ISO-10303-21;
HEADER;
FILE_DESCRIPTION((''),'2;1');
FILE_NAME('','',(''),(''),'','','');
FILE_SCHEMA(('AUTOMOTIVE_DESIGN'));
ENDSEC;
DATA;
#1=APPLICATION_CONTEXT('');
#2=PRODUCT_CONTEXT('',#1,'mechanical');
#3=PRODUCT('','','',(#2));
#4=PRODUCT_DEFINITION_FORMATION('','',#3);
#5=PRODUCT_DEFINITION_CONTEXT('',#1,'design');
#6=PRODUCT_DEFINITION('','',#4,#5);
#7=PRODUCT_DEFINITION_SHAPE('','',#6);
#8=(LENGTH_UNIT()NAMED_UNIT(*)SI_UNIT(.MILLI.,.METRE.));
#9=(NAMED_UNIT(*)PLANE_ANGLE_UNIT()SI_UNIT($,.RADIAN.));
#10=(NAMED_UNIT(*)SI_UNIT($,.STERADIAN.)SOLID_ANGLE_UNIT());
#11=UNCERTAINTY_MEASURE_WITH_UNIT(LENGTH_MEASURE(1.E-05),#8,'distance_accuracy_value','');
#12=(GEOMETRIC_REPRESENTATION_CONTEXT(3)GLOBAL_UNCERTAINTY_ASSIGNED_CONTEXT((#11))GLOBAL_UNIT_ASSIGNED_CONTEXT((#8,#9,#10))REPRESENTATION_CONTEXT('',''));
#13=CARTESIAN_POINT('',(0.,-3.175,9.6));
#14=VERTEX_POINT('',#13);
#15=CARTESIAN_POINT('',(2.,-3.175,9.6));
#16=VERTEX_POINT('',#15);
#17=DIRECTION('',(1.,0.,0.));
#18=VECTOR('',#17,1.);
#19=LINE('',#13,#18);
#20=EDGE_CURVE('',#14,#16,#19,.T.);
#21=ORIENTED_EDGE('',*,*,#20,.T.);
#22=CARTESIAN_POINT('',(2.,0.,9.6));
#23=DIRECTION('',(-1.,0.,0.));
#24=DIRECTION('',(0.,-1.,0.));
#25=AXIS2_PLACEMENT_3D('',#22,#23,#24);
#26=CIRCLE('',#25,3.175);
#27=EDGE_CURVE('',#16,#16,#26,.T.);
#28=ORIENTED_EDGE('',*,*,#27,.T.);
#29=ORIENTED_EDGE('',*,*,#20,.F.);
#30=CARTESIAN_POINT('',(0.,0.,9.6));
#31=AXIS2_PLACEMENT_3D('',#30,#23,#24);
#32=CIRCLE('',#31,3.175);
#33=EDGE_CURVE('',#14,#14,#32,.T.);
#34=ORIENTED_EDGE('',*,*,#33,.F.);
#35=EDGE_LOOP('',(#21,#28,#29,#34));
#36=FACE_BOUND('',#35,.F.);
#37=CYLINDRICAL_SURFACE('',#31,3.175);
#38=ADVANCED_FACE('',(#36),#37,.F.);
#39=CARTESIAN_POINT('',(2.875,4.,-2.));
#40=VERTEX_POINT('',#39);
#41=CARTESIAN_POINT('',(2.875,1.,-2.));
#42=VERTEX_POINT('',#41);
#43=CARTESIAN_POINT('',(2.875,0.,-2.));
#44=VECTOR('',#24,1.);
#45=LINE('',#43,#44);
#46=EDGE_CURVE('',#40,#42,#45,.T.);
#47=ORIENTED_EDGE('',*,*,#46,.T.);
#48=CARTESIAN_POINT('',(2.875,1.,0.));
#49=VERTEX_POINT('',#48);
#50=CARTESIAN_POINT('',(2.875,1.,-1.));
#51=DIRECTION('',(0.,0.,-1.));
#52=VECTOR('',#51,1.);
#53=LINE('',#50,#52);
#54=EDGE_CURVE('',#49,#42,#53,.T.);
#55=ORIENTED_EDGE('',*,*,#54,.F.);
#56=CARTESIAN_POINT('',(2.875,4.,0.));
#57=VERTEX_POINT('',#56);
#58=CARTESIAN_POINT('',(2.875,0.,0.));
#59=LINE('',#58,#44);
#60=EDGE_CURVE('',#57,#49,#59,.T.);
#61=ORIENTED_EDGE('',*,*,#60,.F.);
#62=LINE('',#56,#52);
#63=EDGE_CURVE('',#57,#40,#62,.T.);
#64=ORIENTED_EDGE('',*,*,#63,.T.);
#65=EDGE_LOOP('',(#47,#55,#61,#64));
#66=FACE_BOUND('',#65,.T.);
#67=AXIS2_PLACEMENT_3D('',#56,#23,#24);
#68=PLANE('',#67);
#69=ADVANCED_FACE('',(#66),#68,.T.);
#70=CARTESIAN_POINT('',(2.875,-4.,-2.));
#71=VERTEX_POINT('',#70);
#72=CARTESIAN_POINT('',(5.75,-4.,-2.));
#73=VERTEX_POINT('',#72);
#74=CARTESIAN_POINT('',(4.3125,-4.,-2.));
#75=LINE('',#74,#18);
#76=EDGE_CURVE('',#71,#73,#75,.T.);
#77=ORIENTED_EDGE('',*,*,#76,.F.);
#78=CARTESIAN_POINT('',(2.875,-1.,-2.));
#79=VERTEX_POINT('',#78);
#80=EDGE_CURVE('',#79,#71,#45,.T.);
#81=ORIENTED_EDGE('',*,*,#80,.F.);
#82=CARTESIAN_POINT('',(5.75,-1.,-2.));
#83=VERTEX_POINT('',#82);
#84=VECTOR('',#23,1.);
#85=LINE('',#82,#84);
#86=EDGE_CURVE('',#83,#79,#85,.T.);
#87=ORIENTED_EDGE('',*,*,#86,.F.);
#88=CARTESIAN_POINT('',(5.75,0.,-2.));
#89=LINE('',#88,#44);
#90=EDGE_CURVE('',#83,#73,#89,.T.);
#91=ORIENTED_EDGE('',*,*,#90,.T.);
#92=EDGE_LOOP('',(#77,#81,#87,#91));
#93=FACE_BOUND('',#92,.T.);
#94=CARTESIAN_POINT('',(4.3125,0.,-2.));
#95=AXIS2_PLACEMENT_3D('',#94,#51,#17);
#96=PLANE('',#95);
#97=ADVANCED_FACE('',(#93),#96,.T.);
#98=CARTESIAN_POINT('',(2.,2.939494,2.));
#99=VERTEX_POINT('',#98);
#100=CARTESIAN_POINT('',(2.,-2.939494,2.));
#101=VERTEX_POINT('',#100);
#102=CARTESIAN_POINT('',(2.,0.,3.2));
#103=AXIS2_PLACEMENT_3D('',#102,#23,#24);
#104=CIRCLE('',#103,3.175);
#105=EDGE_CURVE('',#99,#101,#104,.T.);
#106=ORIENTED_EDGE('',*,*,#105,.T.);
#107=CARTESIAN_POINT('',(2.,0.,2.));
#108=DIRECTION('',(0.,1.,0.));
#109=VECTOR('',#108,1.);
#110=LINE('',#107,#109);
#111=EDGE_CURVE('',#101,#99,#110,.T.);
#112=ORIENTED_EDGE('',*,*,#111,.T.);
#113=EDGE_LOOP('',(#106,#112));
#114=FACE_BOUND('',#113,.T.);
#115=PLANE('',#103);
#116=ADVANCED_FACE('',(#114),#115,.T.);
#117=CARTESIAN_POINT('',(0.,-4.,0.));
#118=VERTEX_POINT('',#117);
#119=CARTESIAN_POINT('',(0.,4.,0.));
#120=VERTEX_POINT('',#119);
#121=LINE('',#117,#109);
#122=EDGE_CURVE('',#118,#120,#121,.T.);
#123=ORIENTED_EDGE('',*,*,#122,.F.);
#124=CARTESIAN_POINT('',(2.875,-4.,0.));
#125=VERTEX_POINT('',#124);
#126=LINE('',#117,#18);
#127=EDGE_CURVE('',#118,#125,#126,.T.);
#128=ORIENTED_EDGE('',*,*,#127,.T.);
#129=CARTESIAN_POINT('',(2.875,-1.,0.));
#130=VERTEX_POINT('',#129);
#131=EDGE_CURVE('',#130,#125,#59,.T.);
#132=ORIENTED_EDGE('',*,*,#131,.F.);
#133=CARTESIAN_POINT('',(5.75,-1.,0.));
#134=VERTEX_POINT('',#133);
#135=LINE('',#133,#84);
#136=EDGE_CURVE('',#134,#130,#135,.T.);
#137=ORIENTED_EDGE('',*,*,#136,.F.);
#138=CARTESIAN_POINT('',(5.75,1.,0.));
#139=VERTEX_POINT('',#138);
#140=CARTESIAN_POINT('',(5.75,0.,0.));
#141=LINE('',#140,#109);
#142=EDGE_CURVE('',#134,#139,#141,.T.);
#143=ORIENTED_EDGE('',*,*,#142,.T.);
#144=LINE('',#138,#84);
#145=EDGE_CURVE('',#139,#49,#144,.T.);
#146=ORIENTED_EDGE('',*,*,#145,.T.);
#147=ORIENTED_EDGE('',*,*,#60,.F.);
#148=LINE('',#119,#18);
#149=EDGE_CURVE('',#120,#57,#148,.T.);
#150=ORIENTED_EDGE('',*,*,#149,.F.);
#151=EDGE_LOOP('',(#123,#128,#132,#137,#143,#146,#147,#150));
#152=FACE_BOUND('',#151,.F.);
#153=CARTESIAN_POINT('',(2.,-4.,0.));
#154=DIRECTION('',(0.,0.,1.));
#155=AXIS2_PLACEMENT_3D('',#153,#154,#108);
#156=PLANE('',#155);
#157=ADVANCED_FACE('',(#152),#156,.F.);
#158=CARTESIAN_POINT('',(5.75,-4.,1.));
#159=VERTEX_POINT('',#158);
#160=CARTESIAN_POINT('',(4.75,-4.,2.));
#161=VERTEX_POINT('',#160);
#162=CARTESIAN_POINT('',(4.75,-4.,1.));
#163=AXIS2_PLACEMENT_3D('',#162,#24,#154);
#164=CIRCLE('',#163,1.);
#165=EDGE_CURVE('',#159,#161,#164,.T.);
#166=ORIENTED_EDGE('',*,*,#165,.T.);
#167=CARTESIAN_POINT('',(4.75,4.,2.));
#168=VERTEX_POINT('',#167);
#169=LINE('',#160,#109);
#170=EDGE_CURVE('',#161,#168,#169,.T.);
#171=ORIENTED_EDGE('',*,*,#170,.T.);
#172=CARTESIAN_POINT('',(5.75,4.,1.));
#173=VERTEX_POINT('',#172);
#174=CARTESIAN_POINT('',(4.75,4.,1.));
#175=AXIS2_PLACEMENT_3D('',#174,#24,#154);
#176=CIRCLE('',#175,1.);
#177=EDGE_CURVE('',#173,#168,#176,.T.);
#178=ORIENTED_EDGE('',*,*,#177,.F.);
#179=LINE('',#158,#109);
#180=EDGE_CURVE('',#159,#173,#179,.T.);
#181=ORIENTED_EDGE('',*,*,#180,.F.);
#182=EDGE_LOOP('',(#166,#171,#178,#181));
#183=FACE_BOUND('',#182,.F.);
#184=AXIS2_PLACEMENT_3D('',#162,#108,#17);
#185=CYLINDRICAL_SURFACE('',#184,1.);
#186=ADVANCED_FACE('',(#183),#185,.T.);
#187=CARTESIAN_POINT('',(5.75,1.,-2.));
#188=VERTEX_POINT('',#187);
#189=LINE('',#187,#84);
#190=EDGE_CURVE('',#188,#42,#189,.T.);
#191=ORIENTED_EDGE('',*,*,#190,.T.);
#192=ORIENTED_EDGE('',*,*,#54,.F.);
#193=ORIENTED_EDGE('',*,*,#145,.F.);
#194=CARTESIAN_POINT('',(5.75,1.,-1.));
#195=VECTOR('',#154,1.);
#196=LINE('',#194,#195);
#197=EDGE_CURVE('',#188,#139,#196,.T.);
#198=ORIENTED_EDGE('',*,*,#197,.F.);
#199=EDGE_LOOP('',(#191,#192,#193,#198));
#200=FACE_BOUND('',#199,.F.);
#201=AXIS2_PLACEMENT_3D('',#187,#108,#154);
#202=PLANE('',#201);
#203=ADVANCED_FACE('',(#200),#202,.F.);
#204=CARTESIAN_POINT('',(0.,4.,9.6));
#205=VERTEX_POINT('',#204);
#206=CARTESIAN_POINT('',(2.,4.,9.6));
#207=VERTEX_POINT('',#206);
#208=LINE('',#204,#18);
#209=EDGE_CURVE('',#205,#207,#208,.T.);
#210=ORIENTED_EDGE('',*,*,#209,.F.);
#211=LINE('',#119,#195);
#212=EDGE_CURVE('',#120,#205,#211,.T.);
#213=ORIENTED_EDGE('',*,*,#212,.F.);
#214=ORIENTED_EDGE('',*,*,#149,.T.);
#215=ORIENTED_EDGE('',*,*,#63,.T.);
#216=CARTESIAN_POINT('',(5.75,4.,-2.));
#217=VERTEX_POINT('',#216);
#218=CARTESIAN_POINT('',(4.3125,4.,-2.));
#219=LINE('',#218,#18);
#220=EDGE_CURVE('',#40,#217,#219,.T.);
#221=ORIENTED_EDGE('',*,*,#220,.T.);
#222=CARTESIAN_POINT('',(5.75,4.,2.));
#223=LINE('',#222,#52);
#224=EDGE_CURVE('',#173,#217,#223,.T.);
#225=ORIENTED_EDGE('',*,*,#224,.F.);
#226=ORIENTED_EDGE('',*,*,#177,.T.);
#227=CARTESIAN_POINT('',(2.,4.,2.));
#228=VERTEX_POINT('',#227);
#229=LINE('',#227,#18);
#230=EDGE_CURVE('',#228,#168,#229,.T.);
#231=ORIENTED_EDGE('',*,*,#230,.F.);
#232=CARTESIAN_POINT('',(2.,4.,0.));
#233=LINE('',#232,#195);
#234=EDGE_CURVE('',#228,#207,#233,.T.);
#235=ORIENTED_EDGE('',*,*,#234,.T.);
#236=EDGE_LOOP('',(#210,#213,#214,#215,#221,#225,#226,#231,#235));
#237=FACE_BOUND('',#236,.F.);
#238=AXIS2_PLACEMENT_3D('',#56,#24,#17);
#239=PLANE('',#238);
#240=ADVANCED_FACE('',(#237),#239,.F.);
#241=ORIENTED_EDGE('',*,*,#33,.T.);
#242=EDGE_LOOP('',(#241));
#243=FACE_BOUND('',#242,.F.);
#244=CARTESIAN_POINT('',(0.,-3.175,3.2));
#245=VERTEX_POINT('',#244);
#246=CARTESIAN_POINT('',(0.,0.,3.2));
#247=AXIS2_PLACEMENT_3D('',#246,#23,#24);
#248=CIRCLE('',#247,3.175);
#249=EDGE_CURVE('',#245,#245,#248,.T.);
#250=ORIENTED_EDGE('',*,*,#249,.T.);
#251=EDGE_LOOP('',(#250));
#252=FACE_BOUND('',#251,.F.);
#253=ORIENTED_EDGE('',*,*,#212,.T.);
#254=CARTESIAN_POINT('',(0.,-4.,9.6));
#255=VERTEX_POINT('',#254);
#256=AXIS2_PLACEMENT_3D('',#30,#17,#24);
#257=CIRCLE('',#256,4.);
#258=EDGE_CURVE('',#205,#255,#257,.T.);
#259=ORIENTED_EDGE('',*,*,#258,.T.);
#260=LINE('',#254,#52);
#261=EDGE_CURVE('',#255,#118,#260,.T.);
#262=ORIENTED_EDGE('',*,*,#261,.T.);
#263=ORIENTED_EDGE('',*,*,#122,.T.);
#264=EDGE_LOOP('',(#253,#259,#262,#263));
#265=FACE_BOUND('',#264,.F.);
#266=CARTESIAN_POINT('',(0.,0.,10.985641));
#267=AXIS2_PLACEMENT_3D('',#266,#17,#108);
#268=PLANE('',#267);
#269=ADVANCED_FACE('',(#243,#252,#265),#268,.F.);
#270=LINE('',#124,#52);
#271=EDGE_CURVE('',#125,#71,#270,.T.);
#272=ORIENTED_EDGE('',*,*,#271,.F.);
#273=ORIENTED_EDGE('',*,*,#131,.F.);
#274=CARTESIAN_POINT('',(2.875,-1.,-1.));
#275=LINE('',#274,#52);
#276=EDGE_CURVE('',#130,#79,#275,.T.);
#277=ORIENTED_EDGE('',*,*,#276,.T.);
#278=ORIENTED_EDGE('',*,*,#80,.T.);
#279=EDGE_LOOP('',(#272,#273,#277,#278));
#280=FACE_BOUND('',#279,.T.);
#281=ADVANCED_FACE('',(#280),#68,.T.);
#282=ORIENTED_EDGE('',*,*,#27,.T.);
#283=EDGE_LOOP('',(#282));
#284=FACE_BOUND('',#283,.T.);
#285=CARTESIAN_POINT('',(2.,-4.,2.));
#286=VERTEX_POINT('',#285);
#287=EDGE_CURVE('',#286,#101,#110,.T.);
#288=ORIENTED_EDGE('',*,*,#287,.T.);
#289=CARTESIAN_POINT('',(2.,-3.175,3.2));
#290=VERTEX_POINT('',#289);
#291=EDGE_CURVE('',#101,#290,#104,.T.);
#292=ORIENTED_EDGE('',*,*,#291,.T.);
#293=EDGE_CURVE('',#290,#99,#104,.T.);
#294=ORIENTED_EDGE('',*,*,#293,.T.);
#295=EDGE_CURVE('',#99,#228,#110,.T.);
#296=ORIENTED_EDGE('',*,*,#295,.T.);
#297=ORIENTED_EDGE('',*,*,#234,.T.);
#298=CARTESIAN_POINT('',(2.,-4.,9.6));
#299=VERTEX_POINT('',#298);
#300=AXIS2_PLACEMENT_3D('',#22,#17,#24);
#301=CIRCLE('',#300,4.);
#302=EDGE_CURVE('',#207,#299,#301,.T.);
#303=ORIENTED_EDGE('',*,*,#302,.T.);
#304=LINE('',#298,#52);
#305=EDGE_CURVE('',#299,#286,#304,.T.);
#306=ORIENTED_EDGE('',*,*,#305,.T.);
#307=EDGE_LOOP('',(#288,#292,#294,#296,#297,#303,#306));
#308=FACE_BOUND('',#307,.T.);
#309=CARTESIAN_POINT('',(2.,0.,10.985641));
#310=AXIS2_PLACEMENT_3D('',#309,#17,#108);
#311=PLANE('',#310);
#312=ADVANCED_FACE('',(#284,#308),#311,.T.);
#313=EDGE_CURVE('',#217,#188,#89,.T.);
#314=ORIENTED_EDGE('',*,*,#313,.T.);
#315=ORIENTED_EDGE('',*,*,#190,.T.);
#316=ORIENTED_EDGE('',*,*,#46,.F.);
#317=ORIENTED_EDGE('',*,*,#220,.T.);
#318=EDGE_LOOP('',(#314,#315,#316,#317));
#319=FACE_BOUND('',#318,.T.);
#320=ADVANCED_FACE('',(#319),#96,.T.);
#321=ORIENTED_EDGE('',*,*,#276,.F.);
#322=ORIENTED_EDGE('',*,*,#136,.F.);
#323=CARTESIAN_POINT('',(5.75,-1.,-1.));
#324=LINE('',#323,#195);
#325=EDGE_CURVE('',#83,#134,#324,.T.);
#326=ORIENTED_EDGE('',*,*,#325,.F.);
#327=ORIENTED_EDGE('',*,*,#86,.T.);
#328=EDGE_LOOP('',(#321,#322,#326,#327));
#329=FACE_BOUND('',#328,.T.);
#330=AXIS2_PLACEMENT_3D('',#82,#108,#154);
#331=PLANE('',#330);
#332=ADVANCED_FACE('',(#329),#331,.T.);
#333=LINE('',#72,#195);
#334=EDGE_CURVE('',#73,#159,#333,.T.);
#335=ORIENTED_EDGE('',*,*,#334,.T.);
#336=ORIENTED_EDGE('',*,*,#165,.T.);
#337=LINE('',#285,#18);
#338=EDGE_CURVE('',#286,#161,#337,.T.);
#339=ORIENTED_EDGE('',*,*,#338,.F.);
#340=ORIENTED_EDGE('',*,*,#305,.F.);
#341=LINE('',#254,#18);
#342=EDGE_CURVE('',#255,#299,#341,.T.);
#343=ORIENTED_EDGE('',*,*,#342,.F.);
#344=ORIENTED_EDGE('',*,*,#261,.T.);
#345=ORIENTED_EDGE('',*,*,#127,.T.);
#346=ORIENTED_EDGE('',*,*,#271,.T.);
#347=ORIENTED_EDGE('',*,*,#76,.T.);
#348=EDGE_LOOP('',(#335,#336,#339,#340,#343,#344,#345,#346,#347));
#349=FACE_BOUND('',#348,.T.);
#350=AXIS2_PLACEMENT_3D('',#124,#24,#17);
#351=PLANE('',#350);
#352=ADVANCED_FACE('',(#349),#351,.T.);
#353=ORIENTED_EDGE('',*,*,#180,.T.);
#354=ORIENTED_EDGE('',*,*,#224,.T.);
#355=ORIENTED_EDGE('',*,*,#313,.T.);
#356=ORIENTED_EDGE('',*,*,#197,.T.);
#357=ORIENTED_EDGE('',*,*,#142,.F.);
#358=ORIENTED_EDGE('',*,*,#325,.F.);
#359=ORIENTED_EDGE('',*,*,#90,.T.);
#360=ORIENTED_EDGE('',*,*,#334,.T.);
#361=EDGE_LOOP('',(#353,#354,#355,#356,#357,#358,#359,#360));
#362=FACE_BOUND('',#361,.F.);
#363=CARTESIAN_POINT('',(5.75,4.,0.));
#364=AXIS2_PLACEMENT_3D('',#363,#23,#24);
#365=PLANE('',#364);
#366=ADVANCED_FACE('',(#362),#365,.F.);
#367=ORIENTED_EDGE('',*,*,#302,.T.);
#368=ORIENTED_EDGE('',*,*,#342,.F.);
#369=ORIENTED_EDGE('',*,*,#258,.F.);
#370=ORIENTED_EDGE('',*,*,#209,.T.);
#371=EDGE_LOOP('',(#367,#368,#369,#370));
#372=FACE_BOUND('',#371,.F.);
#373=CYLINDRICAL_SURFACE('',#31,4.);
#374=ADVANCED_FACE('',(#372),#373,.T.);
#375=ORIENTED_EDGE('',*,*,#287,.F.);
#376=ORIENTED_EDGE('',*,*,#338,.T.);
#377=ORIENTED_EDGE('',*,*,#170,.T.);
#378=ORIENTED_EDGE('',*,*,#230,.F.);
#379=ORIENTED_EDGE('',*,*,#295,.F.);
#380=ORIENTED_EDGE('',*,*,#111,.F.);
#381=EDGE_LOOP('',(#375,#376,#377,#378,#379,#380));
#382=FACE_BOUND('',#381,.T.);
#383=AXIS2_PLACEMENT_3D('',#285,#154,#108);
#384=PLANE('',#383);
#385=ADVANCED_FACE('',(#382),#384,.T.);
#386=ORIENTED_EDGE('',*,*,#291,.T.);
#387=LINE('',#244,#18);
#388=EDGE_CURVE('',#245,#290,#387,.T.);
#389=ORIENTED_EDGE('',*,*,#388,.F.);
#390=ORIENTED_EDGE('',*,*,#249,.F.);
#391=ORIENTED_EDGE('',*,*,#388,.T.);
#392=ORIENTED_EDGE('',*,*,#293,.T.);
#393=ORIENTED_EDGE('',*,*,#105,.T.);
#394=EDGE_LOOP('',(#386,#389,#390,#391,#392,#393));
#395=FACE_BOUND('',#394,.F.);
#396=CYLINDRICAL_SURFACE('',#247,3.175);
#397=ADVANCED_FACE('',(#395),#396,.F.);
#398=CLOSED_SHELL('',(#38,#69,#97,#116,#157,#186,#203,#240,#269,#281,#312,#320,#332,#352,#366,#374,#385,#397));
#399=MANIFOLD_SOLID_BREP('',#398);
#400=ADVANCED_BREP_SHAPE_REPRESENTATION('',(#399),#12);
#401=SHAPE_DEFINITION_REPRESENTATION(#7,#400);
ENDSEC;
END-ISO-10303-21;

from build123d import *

# Parameters (mm, degrees)
F1_DEPTH  = 2
F2_W      = 8
F2_H      = 2
F3_DEPTH  = 3.75
F4_W      = 2.875
F4_H      = 8
F5_DEPTH  = 2
F6_W      = 2
F6_H      = 2
F7_DEPTH  = 25
F8_R      = 3.175
F9_DEPTH  = 2
F10_R     = 3.175
F11_DEPTH = 2
F12_R     = 1


with BuildPart() as f1:
    # F0 (on Right) → F1 (new body)
    with BuildSketch(Plane.YZ):
        with BuildLine():
            Line((-4, 9.6), (4, 9.6))
            ThreePointArc((4, 9.6), (0, 13.6), (-4, 9.6))
        make_face()
        with BuildLine():
            ThreePointArc((-4, 9.6), (0, 5.6), (4, 9.6))
            Line((4, 9.6), (-4, 9.6))
        make_face()
        with BuildLine():
            Line((4, 0), (4, 9.6))
            ThreePointArc((4, 9.6), (0, 5.6), (-4, 9.6))
            Line((-4, 9.6), (-4, 0))
            Line((-4, 0), (4, 0))
        make_face()
    extrude(amount=F1_DEPTH)

    # F2 (on face) → F3 (join)
    with BuildSketch(Plane.YZ.offset(2)):
        with Locations((0, 1)):
            Rectangle(F2_W, F2_H)
    extrude(amount=F3_DEPTH)

    # F4 (on face) → F5 (join)
    with BuildSketch(Plane(origin=(0, 0, 0), x_dir=(1, 0, 0), z_dir=(0, 0, -1))):
        with Locations((4.3125, 0)):
            Rectangle(F4_W, F4_H)
    extrude(amount=F5_DEPTH)

    # F6 (on face) → F7 (cut)
    with BuildSketch(Plane.YZ.offset(5.75)):
        with Locations((0, -1)):
            Rectangle(F6_W, F6_H)
    extrude(amount=-F7_DEPTH, mode=Mode.SUBTRACT)

    # F8 (on face) → F9 (cut)
    with BuildSketch(Plane(origin=(0, 0, 0), x_dir=(0, -1, 0), z_dir=(-1, 0, 0))):
        with Locations((0, 9.6)):
            Circle(F8_R)
    extrude(amount=-F9_DEPTH, mode=Mode.SUBTRACT)

    # F10 (on face) → F11 (cut)
    with BuildSketch(Plane(origin=(0, 0, 0), x_dir=(0, -1, 0), z_dir=(-1, 0, 0))):
        with Locations((0, 3.2)):
            Circle(F10_R)
    extrude(amount=-F11_DEPTH, mode=Mode.SUBTRACT)

    # F12
    f12_edges = [f1.edges().sort_by_distance(p)[0] for p in [
        (5.75, 0, 2),
    ]]
    fillet(f12_edges, radius=F12_R)


solid = f1.part
